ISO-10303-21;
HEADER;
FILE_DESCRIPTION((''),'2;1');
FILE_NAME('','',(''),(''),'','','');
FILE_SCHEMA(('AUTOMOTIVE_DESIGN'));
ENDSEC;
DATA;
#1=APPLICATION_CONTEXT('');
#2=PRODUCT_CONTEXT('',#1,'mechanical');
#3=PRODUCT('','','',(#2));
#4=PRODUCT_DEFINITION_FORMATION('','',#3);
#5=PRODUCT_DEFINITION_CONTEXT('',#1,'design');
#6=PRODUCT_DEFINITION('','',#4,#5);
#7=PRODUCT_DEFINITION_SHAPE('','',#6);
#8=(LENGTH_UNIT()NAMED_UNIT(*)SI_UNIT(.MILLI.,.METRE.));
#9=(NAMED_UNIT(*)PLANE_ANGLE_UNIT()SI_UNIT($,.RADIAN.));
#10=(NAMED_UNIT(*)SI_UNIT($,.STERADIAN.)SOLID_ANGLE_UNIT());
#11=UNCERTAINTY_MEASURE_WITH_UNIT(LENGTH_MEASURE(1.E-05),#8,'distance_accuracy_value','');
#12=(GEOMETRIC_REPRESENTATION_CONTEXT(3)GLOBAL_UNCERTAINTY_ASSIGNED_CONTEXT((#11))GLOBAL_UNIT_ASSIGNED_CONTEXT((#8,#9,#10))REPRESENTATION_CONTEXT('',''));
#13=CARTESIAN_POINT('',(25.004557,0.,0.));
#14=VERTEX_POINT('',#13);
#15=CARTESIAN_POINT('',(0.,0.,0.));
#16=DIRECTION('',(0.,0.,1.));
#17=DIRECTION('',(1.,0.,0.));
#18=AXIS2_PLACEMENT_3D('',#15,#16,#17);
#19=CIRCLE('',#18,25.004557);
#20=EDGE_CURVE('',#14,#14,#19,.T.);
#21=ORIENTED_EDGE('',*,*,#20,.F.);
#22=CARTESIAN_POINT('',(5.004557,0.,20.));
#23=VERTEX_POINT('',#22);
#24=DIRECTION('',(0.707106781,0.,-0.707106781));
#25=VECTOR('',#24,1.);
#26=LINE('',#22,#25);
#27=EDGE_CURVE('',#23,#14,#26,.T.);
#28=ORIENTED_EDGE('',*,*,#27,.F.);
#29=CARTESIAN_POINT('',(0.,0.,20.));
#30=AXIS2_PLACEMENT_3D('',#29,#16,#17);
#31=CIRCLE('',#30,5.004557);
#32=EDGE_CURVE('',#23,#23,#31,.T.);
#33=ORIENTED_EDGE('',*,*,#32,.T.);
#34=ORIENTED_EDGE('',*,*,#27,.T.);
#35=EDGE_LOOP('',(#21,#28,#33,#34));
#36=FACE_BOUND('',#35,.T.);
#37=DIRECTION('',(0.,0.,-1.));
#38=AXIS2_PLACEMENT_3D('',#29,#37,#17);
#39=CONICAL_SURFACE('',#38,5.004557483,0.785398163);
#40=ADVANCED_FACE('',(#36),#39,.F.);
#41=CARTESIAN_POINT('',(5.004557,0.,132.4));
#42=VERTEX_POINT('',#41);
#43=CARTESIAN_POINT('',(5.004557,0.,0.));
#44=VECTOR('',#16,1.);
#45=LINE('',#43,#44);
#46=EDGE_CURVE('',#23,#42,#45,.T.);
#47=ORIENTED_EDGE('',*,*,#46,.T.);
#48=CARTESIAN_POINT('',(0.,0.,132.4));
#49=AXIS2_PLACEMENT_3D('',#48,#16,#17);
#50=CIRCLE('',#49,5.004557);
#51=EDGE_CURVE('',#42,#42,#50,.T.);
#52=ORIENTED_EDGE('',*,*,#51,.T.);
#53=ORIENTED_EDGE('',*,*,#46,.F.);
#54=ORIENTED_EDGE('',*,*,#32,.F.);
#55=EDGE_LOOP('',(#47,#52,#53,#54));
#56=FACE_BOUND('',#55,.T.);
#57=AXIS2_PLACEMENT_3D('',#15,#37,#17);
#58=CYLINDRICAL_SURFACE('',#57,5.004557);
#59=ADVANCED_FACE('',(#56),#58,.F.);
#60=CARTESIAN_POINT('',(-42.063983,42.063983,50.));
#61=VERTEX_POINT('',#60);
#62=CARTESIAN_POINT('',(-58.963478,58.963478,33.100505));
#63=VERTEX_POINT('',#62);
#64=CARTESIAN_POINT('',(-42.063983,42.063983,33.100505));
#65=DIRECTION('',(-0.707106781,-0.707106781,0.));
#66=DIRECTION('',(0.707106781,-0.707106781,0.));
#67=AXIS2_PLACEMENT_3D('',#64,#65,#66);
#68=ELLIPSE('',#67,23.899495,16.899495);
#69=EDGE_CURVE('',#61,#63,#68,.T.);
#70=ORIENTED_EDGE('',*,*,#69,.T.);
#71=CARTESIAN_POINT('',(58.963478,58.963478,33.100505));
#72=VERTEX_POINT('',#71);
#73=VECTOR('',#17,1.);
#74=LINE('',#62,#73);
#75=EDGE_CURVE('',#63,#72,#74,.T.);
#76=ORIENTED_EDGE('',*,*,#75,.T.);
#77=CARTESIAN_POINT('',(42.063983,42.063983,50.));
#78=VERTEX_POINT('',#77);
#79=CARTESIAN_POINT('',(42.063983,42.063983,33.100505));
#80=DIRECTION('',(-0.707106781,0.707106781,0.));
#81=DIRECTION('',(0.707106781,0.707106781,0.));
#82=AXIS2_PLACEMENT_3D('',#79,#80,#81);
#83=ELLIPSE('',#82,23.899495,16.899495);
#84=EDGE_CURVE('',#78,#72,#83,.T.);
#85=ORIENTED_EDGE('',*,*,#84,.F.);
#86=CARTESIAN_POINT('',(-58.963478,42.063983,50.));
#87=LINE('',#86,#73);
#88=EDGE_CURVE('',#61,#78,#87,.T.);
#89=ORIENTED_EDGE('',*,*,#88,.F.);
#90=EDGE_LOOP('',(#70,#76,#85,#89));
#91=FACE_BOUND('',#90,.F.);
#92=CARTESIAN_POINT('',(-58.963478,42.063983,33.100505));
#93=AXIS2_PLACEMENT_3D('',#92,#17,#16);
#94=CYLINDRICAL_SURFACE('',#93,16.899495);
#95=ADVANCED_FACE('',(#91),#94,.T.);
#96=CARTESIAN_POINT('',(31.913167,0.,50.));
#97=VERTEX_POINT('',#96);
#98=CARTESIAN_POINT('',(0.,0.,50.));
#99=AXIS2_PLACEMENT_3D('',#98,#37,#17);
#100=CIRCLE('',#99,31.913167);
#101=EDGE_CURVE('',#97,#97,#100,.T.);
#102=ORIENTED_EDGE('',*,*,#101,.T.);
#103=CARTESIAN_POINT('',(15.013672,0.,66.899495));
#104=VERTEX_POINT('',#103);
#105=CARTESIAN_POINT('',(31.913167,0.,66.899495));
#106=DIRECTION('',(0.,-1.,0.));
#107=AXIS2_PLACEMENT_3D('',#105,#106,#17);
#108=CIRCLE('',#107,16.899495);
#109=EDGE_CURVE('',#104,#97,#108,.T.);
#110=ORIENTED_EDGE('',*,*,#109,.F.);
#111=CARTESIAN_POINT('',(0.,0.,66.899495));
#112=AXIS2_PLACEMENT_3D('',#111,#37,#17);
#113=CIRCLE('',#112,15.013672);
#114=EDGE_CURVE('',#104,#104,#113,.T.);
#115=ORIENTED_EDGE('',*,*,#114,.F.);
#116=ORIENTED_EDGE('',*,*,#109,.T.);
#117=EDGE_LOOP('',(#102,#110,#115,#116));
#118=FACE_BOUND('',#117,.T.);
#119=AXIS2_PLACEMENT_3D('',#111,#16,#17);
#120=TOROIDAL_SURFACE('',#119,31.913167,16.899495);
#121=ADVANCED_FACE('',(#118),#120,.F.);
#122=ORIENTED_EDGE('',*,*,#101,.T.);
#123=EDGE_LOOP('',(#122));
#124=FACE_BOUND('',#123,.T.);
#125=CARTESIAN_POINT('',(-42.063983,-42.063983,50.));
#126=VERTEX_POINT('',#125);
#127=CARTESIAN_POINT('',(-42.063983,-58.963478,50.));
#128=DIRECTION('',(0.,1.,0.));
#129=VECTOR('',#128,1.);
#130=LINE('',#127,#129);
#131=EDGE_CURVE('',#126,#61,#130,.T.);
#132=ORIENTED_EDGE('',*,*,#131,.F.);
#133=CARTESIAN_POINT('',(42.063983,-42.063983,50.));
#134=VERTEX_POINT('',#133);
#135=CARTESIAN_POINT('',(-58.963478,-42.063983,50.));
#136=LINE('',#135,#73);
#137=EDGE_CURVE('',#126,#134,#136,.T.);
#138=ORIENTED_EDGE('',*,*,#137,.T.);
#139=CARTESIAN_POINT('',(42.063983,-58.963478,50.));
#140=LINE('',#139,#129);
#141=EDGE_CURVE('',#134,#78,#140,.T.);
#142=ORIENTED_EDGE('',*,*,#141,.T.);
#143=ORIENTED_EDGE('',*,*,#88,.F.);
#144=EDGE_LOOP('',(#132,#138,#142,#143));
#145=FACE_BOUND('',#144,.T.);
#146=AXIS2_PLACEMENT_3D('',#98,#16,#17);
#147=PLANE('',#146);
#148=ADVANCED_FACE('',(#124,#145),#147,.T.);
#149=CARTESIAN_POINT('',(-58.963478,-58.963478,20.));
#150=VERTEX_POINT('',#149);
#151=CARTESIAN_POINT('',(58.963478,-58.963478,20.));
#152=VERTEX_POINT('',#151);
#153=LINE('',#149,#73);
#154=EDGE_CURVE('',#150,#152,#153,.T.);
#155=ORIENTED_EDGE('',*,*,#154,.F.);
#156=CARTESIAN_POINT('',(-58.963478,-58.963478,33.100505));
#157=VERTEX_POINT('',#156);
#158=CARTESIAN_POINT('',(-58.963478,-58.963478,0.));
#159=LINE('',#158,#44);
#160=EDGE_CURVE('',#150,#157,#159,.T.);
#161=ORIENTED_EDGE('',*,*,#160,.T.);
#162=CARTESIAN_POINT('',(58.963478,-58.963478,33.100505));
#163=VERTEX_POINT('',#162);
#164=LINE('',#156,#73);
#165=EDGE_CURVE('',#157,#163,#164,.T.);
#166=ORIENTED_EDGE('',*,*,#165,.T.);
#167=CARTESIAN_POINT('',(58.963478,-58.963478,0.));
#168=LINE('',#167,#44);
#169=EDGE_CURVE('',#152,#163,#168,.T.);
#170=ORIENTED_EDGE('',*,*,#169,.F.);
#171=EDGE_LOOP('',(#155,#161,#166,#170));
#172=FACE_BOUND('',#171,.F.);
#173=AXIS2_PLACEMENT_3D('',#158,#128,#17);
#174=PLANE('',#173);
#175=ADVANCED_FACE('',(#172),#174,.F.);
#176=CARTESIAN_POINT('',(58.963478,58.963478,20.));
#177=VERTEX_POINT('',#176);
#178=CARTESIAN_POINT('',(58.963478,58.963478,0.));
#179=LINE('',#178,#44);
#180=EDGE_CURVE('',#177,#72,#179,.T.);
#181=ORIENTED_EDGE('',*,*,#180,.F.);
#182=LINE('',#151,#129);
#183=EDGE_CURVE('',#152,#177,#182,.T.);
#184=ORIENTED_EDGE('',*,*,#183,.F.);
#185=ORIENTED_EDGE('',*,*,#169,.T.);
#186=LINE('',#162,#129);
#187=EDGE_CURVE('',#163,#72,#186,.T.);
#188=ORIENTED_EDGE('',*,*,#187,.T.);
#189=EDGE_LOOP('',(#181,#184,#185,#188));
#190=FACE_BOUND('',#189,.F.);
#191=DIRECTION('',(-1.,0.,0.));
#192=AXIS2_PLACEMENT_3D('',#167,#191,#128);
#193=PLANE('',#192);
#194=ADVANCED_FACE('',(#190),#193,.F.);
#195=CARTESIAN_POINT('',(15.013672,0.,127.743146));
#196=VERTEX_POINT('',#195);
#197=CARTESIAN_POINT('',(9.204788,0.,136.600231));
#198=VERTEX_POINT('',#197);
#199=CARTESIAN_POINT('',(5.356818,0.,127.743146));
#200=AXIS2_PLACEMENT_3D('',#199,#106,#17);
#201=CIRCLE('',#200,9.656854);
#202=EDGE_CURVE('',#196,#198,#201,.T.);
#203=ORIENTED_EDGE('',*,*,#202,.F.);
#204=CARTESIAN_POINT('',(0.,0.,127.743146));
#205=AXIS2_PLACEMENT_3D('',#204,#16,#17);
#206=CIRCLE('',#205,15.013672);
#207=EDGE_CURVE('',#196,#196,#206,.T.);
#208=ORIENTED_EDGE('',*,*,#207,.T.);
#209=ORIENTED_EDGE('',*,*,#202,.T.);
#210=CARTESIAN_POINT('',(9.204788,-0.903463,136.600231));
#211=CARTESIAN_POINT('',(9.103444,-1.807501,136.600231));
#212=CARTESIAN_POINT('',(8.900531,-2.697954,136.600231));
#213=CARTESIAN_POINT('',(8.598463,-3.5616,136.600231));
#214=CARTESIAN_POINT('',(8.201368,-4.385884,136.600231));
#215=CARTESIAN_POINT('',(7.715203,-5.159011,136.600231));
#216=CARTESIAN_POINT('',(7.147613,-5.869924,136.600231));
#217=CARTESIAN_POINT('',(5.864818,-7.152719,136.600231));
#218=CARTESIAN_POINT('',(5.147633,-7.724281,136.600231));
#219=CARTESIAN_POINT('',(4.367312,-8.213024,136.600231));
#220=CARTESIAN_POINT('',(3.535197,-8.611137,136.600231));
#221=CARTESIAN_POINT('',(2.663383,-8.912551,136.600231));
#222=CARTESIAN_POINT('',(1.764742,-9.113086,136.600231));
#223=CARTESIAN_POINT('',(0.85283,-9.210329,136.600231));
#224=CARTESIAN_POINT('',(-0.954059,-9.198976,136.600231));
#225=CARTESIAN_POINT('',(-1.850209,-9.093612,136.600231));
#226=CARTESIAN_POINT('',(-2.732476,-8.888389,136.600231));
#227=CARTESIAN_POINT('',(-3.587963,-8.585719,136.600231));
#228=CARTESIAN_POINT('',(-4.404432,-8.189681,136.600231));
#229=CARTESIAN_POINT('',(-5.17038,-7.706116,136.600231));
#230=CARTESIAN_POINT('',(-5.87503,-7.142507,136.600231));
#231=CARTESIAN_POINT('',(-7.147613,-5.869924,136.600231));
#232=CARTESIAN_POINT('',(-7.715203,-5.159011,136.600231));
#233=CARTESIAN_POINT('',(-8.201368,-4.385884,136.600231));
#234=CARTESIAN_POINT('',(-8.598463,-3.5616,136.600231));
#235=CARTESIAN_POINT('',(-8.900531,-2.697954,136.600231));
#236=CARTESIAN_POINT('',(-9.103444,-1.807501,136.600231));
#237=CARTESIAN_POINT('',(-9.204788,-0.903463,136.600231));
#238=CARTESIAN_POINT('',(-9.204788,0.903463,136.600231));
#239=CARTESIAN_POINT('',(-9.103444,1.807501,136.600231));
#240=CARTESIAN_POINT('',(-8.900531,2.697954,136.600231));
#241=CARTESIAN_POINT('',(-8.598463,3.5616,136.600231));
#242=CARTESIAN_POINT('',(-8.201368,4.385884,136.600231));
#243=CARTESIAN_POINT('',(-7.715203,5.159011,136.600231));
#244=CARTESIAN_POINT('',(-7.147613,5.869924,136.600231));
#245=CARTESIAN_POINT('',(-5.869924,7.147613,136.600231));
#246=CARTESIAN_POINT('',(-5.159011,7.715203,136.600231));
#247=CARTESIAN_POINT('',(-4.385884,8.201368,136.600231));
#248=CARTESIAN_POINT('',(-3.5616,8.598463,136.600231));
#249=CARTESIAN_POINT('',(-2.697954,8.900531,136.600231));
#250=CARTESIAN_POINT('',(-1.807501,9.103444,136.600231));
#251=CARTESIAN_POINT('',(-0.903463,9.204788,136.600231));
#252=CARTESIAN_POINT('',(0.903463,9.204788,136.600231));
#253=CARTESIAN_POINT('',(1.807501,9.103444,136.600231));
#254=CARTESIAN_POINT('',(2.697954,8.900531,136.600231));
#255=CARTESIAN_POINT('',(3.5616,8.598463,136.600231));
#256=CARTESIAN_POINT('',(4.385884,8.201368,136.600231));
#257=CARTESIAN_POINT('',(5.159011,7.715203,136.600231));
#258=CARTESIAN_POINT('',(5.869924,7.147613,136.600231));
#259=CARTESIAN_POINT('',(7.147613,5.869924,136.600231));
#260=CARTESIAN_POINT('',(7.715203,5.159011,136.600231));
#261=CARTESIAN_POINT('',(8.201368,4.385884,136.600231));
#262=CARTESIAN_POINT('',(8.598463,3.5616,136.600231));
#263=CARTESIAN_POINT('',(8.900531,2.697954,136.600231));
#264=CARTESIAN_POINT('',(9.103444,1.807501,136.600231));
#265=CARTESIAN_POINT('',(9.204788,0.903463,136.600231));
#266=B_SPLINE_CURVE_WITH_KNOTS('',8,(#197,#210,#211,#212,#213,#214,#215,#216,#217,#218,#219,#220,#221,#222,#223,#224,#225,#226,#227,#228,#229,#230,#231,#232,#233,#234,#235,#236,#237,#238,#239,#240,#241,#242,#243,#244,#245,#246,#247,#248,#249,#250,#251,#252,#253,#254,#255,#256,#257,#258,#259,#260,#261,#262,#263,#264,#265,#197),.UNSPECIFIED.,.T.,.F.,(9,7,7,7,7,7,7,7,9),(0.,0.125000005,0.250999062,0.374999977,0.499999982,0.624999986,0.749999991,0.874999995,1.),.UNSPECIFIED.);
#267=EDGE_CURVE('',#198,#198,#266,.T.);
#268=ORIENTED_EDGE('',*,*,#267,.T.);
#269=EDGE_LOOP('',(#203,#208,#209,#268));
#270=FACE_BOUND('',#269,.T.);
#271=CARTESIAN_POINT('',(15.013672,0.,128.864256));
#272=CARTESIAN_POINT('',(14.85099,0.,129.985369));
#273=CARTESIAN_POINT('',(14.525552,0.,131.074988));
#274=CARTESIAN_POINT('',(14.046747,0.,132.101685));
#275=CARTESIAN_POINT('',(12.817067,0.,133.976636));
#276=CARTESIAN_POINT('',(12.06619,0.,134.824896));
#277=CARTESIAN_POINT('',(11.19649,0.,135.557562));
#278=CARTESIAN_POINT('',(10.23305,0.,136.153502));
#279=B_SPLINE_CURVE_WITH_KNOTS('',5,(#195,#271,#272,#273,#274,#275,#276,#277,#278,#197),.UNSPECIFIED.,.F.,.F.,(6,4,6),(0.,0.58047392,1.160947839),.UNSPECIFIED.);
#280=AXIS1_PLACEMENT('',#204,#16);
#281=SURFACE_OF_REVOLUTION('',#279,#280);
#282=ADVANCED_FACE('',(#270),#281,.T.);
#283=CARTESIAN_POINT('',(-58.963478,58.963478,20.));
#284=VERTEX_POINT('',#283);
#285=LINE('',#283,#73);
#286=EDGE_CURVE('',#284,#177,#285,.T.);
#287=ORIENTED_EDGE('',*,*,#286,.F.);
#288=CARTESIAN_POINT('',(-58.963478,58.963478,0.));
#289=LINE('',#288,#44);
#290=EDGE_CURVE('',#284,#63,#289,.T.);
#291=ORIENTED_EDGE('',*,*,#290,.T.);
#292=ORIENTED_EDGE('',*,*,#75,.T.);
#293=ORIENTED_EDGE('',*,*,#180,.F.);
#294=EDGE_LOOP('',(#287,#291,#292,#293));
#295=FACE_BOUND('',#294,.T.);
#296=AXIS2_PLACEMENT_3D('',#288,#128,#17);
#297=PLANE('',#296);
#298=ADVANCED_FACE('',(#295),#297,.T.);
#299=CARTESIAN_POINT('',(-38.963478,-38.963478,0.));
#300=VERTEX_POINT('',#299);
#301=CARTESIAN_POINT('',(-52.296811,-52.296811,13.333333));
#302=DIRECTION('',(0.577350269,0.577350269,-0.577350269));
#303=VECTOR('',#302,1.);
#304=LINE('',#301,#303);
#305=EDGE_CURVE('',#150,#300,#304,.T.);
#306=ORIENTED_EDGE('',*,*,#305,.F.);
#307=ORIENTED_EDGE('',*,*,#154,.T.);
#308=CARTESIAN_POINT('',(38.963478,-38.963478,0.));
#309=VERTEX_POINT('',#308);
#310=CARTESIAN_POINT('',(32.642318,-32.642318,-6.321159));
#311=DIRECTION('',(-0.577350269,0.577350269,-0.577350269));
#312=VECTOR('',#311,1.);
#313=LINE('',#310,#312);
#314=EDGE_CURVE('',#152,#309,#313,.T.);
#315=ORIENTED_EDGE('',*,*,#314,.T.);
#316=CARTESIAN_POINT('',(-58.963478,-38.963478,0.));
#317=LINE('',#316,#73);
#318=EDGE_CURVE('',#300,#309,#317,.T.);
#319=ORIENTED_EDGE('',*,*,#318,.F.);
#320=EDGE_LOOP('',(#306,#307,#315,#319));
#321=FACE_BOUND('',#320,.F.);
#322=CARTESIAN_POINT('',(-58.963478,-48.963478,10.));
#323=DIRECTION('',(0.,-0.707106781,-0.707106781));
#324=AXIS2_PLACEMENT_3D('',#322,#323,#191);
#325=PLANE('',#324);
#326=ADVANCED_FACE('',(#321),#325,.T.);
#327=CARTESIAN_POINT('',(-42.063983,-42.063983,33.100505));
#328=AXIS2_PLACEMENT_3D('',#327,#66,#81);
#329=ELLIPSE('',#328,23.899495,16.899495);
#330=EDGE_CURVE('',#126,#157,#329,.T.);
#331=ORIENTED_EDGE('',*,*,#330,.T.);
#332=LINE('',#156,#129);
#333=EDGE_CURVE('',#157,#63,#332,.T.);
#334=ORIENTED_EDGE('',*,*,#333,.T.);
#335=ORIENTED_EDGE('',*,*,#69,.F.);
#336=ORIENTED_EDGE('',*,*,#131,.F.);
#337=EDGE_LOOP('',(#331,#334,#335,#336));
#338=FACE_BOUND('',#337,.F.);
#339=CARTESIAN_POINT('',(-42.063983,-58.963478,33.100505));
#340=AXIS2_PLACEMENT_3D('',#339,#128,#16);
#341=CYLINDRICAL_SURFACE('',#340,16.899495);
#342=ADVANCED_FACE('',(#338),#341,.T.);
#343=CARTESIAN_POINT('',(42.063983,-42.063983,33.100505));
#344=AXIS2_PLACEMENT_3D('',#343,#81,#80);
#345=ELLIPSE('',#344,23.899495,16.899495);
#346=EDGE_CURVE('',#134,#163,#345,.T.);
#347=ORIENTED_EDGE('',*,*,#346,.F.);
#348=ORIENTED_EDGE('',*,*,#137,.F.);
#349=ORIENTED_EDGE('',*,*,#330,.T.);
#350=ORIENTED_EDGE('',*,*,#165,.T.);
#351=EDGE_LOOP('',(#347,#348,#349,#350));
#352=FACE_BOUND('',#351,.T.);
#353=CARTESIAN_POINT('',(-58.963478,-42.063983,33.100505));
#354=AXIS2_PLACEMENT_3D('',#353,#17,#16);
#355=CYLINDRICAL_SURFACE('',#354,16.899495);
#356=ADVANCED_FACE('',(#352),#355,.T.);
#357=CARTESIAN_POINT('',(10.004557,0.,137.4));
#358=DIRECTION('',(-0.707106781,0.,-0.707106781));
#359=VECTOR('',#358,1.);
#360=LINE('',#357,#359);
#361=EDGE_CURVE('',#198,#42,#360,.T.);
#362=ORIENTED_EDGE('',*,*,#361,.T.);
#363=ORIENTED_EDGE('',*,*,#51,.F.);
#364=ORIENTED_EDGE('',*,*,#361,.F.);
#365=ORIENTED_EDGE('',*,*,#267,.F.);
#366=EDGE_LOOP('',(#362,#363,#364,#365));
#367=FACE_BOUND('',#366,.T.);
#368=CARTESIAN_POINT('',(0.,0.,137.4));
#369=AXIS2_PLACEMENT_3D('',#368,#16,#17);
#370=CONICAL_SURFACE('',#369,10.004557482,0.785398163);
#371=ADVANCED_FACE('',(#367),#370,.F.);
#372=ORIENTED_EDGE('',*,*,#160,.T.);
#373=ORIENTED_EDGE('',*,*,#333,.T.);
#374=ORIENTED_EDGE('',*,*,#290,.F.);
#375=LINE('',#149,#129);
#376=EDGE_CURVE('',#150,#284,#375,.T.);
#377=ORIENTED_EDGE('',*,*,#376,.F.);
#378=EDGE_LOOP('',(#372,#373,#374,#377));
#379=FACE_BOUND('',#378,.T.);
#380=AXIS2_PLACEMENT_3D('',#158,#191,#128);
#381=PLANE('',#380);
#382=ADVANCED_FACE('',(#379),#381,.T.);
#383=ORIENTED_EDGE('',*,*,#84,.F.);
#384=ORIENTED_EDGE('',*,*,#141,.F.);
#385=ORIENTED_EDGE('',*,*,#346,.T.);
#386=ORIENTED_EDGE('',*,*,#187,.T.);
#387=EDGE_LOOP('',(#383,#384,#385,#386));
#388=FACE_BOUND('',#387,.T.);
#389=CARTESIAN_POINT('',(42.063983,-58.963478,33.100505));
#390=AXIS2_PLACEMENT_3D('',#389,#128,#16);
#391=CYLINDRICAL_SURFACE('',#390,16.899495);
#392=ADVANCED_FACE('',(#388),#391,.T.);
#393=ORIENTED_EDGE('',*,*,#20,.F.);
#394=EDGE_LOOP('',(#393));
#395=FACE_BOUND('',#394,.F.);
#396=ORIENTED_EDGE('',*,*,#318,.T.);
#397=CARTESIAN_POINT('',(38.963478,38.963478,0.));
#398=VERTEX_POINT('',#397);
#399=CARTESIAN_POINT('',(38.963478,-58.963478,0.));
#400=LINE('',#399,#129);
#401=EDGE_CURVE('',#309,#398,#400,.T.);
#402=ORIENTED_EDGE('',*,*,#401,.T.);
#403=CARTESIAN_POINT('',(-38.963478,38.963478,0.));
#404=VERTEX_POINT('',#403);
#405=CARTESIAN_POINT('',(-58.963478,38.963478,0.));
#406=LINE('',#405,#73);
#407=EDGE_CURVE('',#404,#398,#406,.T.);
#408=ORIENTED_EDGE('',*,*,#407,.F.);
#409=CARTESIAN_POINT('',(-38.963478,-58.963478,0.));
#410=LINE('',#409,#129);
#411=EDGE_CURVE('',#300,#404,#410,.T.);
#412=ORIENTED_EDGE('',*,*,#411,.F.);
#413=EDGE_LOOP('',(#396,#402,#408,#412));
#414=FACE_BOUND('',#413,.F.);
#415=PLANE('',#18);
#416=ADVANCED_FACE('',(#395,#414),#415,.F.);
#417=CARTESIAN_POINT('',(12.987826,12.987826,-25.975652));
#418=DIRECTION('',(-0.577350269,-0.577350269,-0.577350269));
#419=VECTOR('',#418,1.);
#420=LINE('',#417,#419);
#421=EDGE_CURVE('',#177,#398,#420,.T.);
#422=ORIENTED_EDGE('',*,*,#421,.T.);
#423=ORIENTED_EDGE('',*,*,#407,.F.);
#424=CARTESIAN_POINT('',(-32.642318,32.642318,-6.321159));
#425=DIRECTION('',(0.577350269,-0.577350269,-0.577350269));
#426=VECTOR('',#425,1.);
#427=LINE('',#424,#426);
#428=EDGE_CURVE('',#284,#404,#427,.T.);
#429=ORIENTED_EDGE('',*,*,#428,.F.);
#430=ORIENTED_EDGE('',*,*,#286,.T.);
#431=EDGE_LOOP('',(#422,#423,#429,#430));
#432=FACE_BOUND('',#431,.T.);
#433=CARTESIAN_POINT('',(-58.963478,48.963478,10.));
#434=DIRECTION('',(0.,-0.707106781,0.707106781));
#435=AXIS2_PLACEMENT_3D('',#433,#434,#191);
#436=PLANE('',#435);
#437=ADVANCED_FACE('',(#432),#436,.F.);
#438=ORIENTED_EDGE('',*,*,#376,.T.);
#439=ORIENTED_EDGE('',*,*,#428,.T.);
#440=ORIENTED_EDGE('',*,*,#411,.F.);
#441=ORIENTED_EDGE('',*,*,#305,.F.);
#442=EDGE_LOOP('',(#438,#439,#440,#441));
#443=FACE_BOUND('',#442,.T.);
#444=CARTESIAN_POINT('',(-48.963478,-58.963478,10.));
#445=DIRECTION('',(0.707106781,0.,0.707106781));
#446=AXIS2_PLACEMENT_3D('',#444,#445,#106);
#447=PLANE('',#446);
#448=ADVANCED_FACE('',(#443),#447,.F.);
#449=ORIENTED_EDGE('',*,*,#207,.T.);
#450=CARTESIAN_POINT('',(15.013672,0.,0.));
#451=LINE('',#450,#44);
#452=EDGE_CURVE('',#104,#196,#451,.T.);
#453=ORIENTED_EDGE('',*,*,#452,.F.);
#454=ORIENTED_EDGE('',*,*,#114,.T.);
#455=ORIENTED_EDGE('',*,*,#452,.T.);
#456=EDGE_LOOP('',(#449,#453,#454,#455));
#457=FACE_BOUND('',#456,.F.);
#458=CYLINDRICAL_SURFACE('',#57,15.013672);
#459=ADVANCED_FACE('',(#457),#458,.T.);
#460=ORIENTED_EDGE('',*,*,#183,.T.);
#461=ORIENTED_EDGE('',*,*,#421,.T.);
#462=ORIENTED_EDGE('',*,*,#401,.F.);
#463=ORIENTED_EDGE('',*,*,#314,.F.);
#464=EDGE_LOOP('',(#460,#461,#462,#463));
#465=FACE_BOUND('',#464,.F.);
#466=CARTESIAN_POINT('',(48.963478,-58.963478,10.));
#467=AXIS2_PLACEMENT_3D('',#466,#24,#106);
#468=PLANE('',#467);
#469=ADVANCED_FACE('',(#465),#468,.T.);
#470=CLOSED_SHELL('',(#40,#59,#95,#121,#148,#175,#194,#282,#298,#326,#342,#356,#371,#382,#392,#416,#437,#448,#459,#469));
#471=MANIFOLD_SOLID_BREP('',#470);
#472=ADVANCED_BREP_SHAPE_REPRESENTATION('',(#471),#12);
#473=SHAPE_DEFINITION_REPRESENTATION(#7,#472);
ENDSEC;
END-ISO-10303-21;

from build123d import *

# Parameters (mm, degrees)
F0_W     = 117.9269552231
F0_H     = 117.9269552231
F0_R     = 15.0136724475
F0_R_2   = 5.0045574825
F1_DEPTH = 50
F2_DEPTH = 137.4
F3_R     = 9.6568542495
F5_R     = 16.8994949366
F6_SIZE  = 20


# Not quite as in the source:
# - a fillet or chamfer that OpenCascade refuses, or shapes differently, is made with other operations: its cross-section is extruded or revolved along the edge and cut away or added


with BuildPart() as f1:
    # F0 (on Top) → F1 (new body)
    with BuildSketch(Plane.XY):
        Rectangle(F0_W, F0_H)
        Circle(F0_R, mode=Mode.SUBTRACT)
        Circle(F0_R)
        Circle(F0_R_2, mode=Mode.SUBTRACT)
    extrude(amount=F1_DEPTH)

    # F0 (on Top) → F2 (join)
    with BuildSketch(Plane.XY):
        Circle(F0_R)
        Circle(F0_R_2, mode=Mode.SUBTRACT)
    extrude(amount=F2_DEPTH)

    # F3
    f3_edges = [f1.edges().sort_by_distance(p)[0] for p in [
        (-15.013672, 0, 137.4),
    ]]
    fillet(f3_edges, radius=F3_R)

    # F4: chamfer of 5 on 1 edges, made by hand

    # F4_s1 → F4_t2 (revolve, cut)
    with BuildSketch(Plane.XZ):
        Polygon((10.0045574825, 137.4), (5.0045574825, 132.4), (5.0045574825, 137.4), align=None)
    revolve(axis=Axis((0, 0, 137.4), (0, 0, 1)), mode=Mode.SUBTRACT)

    # F5
    f5_edges = [f1.edges().sort_by_distance(p)[0] for p in [
        (58.963478, 0, 50),
        (0, -58.963478, 50),
        (0, 58.963478, 50),
        (-58.963478, 0, 50),
        (-15.013672, 0, 50),
    ]]
    fillet(f5_edges, radius=F5_R)

    # F6
    f6_edges = [f1.edges().sort_by_distance(p)[0] for p in [
        (-58.963478, 0, 0),
        (0, 58.963478, 0),
        (58.963478, 0, 0),
        (0, -58.963478, 0),
        (-5.004557, 0, 0),
    ]]
    chamfer(f6_edges, length=F6_SIZE)


solid = f1.part
